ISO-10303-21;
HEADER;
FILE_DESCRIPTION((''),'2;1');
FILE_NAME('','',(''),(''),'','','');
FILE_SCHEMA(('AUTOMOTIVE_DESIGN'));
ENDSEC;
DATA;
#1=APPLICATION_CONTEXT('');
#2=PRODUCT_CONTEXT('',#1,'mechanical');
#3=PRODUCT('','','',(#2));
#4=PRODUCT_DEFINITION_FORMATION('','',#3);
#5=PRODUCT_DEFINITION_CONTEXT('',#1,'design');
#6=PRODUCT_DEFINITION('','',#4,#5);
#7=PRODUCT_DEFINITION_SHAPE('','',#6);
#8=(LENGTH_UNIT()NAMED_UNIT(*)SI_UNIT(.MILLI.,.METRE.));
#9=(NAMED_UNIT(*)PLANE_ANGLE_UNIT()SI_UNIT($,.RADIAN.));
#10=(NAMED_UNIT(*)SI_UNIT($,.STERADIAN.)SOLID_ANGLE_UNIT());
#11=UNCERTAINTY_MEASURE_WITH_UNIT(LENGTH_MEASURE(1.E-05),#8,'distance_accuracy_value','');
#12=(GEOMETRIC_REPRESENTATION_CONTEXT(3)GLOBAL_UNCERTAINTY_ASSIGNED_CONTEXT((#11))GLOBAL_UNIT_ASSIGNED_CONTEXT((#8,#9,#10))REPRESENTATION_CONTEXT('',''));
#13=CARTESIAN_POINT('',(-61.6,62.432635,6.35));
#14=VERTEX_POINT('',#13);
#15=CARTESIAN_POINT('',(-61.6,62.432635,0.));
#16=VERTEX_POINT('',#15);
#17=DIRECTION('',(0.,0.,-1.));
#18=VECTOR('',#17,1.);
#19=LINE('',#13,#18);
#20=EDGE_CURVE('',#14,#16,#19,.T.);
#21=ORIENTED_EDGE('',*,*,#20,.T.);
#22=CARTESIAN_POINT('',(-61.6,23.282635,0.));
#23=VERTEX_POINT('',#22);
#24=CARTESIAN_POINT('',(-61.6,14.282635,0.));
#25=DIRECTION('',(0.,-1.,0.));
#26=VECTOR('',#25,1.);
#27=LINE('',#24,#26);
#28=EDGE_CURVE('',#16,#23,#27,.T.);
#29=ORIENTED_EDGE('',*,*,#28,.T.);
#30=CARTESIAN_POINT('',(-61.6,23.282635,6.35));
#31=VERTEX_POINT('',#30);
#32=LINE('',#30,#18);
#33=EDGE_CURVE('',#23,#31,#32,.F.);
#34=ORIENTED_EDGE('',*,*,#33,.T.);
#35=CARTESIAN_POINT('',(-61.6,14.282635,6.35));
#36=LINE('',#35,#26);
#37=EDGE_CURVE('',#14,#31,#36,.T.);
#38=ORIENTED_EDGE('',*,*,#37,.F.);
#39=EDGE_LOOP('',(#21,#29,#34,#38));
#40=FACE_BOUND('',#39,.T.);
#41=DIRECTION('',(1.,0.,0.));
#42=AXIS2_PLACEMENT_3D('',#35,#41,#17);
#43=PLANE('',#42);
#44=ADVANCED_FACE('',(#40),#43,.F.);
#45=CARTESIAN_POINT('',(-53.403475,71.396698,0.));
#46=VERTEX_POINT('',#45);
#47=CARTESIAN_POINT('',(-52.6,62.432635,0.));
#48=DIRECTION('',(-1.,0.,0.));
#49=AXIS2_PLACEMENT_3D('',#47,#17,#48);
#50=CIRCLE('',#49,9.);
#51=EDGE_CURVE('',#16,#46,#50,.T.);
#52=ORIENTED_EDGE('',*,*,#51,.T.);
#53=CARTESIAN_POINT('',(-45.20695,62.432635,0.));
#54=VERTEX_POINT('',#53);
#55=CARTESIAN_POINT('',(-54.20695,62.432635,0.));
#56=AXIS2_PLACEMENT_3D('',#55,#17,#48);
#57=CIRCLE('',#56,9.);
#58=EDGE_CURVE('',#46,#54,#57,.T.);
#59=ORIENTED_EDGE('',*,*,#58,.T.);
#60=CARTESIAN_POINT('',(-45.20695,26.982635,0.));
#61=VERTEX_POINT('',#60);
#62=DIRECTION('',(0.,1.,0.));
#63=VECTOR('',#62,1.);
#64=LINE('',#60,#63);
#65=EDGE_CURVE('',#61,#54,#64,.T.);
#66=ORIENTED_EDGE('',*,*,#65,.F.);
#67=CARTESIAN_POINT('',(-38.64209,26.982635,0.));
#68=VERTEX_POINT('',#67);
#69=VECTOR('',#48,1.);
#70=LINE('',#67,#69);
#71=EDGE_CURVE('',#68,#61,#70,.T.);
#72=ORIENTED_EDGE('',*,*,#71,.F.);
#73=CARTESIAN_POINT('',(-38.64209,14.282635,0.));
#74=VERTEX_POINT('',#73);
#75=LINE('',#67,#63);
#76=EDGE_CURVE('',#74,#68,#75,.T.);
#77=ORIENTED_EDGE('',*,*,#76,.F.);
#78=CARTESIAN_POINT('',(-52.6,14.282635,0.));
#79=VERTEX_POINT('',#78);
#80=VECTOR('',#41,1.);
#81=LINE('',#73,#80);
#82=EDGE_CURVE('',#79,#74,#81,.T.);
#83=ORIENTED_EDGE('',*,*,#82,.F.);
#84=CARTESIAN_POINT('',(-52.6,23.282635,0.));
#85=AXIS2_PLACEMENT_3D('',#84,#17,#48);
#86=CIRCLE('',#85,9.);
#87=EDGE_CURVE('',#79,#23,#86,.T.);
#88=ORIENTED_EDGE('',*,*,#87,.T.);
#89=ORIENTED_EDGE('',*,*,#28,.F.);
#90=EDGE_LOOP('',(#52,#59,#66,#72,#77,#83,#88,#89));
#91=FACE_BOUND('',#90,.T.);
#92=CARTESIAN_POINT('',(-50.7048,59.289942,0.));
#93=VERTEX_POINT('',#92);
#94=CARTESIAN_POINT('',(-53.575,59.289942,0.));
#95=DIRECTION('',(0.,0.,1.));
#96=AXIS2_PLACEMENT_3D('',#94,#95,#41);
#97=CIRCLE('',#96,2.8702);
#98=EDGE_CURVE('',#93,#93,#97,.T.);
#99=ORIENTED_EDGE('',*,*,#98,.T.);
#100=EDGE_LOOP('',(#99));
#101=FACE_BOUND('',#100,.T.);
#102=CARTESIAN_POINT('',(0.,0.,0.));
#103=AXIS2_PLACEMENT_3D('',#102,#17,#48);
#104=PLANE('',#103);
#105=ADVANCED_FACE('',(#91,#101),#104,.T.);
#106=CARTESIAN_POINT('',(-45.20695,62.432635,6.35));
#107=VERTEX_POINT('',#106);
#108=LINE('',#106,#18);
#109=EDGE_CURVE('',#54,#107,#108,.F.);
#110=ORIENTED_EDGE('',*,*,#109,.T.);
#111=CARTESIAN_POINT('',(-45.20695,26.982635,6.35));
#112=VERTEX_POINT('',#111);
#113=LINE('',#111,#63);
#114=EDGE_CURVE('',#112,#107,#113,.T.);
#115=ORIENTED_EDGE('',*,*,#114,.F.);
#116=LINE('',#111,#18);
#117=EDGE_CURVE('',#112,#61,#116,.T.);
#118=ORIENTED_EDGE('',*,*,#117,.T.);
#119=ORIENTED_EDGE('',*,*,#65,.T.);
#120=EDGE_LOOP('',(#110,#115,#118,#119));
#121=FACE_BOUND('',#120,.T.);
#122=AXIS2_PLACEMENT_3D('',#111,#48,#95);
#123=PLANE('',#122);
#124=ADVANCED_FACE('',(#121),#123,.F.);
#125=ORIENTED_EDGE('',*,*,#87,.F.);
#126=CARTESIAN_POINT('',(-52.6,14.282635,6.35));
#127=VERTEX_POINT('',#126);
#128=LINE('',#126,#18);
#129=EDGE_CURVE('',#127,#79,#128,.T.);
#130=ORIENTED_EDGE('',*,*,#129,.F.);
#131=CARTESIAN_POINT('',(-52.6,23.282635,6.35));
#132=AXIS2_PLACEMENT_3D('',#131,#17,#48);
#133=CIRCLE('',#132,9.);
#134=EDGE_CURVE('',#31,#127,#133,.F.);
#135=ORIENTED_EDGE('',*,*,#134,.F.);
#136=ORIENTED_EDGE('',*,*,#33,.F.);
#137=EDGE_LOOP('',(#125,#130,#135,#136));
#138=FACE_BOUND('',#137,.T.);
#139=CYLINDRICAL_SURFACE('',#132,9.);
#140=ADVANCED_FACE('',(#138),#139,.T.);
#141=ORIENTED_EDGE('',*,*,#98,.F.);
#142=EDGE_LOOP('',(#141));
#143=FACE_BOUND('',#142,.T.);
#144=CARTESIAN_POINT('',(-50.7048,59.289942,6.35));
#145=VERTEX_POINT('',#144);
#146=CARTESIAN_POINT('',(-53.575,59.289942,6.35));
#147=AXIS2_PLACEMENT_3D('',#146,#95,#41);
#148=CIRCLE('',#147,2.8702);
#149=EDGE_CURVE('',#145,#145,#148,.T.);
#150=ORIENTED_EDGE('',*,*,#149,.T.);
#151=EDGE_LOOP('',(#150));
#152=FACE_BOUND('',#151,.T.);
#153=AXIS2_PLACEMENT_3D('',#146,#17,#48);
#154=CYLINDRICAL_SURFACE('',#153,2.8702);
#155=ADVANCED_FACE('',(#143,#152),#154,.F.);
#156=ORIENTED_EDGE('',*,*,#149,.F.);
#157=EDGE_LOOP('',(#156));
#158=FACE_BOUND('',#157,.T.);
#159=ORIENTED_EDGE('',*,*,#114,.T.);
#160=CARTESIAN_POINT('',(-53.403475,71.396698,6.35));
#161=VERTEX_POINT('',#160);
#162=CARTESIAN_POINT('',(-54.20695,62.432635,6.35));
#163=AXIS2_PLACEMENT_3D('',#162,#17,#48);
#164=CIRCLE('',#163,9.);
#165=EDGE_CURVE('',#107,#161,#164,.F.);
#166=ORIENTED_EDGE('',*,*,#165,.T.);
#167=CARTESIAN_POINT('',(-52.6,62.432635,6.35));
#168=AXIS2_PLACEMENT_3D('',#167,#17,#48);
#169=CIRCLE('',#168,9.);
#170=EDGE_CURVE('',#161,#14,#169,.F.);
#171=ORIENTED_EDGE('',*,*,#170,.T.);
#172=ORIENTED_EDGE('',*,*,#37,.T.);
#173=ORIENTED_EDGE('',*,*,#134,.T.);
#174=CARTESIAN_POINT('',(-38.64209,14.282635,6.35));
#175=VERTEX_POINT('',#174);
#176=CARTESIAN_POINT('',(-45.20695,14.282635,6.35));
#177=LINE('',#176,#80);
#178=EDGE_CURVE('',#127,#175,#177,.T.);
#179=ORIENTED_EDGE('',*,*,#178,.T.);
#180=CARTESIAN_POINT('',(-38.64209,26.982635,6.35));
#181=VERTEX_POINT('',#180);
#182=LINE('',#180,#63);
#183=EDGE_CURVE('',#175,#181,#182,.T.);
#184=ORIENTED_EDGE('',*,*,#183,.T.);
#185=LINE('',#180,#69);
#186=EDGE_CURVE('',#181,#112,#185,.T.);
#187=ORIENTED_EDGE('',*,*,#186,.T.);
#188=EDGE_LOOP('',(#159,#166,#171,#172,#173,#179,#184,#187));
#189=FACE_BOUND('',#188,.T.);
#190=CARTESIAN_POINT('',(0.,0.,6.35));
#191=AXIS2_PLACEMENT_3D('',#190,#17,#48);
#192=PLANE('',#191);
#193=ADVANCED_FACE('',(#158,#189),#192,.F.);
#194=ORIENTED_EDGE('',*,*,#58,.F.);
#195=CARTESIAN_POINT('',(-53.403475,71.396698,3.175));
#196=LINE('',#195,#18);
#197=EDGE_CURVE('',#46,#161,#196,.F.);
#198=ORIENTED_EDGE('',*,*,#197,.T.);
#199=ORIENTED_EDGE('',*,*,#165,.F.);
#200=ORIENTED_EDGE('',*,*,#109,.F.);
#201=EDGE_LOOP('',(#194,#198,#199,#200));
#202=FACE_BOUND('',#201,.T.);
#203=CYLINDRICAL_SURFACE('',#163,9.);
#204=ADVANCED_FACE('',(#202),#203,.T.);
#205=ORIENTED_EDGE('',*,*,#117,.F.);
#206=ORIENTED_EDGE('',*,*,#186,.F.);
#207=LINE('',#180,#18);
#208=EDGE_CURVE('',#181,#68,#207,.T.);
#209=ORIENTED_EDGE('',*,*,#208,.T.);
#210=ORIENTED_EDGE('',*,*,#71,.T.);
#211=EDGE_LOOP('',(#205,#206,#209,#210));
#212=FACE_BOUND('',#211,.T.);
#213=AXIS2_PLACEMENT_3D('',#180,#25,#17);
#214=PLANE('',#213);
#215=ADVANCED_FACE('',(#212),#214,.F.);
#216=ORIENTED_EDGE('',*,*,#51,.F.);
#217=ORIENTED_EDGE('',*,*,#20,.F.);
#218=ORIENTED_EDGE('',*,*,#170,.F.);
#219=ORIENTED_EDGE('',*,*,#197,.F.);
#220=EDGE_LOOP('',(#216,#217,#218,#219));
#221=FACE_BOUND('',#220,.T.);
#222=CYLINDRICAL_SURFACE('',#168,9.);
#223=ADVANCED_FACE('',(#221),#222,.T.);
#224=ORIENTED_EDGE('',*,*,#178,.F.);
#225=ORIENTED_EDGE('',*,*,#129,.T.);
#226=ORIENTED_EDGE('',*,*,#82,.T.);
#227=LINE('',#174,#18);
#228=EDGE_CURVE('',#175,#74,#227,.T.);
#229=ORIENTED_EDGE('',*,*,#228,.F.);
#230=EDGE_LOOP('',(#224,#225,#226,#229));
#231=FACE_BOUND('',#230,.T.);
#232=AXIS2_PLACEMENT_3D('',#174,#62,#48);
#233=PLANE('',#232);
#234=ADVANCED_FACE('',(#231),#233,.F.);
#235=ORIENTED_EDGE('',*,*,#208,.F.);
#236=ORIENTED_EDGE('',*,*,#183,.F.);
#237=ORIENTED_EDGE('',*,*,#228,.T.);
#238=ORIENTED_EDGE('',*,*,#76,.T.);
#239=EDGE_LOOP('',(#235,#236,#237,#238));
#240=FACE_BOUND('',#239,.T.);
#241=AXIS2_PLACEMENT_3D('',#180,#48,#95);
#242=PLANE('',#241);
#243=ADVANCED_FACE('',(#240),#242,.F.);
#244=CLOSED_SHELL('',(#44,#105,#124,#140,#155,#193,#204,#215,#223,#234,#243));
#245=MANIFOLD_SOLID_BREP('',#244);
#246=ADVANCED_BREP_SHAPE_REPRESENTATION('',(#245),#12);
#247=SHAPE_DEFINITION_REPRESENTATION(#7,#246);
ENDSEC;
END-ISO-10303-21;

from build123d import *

# Parameters (mm, degrees)
SKETCH1_R           = 2.8702
BOSS_EXTRUDE1_DEPTH = 6.35
FILLET1_R           = 9
FILLET2_R           = 9


with BuildPart() as part:
    # Sketch1 → Boss-Extrude1 (new body)
    with BuildSketch(Plane.XY):
        Polygon((-38.642090152, 26.982634823), (-45.206950064, 26.982634823), (-45.206950064, 71.432634823), (-61.6, 71.432634823), (-61.6, 14.282634823), (-45.206950064, 14.282634823), (-38.642090152, 14.282634823), align=None)
        with Locations((-53.575, 59.289941788)):
            Circle(SKETCH1_R, mode=Mode.SUBTRACT)
    extrude(amount=BOSS_EXTRUDE1_DEPTH)

    # Fillet1
    # the kernel refuses this fillet: 9 mm, written as the material it takes off along each edge
    with BuildSketch(Plane(origin=(-45.206950064, 71.432634823, -22.5), x_dir=(-1, 0, 0), z_dir=(0, 0, 1)), Plane(origin=(-61.6, 71.432634823, -22.5), x_dir=(0, -1, 0), z_dir=(0, 0, 1))) as fillet1_piece_1:
        with BuildLine():
            CenterArc((FILLET1_R, FILLET1_R), FILLET1_R, 180, 90)
            Line((0, FILLET1_R), (0, 0))
            Line((0, 0), (FILLET1_R, 0))
        make_face()
    extrude(amount=51.35, mode=Mode.SUBTRACT)

    # Fillet2
    fillet2_edges = [part.edges().sort_by_distance(p)[0] for p in [
        (-61.6, 14.282634823, 3.175),
    ]]
    fillet(fillet2_edges, radius=FILLET2_R)


solid = part.part
